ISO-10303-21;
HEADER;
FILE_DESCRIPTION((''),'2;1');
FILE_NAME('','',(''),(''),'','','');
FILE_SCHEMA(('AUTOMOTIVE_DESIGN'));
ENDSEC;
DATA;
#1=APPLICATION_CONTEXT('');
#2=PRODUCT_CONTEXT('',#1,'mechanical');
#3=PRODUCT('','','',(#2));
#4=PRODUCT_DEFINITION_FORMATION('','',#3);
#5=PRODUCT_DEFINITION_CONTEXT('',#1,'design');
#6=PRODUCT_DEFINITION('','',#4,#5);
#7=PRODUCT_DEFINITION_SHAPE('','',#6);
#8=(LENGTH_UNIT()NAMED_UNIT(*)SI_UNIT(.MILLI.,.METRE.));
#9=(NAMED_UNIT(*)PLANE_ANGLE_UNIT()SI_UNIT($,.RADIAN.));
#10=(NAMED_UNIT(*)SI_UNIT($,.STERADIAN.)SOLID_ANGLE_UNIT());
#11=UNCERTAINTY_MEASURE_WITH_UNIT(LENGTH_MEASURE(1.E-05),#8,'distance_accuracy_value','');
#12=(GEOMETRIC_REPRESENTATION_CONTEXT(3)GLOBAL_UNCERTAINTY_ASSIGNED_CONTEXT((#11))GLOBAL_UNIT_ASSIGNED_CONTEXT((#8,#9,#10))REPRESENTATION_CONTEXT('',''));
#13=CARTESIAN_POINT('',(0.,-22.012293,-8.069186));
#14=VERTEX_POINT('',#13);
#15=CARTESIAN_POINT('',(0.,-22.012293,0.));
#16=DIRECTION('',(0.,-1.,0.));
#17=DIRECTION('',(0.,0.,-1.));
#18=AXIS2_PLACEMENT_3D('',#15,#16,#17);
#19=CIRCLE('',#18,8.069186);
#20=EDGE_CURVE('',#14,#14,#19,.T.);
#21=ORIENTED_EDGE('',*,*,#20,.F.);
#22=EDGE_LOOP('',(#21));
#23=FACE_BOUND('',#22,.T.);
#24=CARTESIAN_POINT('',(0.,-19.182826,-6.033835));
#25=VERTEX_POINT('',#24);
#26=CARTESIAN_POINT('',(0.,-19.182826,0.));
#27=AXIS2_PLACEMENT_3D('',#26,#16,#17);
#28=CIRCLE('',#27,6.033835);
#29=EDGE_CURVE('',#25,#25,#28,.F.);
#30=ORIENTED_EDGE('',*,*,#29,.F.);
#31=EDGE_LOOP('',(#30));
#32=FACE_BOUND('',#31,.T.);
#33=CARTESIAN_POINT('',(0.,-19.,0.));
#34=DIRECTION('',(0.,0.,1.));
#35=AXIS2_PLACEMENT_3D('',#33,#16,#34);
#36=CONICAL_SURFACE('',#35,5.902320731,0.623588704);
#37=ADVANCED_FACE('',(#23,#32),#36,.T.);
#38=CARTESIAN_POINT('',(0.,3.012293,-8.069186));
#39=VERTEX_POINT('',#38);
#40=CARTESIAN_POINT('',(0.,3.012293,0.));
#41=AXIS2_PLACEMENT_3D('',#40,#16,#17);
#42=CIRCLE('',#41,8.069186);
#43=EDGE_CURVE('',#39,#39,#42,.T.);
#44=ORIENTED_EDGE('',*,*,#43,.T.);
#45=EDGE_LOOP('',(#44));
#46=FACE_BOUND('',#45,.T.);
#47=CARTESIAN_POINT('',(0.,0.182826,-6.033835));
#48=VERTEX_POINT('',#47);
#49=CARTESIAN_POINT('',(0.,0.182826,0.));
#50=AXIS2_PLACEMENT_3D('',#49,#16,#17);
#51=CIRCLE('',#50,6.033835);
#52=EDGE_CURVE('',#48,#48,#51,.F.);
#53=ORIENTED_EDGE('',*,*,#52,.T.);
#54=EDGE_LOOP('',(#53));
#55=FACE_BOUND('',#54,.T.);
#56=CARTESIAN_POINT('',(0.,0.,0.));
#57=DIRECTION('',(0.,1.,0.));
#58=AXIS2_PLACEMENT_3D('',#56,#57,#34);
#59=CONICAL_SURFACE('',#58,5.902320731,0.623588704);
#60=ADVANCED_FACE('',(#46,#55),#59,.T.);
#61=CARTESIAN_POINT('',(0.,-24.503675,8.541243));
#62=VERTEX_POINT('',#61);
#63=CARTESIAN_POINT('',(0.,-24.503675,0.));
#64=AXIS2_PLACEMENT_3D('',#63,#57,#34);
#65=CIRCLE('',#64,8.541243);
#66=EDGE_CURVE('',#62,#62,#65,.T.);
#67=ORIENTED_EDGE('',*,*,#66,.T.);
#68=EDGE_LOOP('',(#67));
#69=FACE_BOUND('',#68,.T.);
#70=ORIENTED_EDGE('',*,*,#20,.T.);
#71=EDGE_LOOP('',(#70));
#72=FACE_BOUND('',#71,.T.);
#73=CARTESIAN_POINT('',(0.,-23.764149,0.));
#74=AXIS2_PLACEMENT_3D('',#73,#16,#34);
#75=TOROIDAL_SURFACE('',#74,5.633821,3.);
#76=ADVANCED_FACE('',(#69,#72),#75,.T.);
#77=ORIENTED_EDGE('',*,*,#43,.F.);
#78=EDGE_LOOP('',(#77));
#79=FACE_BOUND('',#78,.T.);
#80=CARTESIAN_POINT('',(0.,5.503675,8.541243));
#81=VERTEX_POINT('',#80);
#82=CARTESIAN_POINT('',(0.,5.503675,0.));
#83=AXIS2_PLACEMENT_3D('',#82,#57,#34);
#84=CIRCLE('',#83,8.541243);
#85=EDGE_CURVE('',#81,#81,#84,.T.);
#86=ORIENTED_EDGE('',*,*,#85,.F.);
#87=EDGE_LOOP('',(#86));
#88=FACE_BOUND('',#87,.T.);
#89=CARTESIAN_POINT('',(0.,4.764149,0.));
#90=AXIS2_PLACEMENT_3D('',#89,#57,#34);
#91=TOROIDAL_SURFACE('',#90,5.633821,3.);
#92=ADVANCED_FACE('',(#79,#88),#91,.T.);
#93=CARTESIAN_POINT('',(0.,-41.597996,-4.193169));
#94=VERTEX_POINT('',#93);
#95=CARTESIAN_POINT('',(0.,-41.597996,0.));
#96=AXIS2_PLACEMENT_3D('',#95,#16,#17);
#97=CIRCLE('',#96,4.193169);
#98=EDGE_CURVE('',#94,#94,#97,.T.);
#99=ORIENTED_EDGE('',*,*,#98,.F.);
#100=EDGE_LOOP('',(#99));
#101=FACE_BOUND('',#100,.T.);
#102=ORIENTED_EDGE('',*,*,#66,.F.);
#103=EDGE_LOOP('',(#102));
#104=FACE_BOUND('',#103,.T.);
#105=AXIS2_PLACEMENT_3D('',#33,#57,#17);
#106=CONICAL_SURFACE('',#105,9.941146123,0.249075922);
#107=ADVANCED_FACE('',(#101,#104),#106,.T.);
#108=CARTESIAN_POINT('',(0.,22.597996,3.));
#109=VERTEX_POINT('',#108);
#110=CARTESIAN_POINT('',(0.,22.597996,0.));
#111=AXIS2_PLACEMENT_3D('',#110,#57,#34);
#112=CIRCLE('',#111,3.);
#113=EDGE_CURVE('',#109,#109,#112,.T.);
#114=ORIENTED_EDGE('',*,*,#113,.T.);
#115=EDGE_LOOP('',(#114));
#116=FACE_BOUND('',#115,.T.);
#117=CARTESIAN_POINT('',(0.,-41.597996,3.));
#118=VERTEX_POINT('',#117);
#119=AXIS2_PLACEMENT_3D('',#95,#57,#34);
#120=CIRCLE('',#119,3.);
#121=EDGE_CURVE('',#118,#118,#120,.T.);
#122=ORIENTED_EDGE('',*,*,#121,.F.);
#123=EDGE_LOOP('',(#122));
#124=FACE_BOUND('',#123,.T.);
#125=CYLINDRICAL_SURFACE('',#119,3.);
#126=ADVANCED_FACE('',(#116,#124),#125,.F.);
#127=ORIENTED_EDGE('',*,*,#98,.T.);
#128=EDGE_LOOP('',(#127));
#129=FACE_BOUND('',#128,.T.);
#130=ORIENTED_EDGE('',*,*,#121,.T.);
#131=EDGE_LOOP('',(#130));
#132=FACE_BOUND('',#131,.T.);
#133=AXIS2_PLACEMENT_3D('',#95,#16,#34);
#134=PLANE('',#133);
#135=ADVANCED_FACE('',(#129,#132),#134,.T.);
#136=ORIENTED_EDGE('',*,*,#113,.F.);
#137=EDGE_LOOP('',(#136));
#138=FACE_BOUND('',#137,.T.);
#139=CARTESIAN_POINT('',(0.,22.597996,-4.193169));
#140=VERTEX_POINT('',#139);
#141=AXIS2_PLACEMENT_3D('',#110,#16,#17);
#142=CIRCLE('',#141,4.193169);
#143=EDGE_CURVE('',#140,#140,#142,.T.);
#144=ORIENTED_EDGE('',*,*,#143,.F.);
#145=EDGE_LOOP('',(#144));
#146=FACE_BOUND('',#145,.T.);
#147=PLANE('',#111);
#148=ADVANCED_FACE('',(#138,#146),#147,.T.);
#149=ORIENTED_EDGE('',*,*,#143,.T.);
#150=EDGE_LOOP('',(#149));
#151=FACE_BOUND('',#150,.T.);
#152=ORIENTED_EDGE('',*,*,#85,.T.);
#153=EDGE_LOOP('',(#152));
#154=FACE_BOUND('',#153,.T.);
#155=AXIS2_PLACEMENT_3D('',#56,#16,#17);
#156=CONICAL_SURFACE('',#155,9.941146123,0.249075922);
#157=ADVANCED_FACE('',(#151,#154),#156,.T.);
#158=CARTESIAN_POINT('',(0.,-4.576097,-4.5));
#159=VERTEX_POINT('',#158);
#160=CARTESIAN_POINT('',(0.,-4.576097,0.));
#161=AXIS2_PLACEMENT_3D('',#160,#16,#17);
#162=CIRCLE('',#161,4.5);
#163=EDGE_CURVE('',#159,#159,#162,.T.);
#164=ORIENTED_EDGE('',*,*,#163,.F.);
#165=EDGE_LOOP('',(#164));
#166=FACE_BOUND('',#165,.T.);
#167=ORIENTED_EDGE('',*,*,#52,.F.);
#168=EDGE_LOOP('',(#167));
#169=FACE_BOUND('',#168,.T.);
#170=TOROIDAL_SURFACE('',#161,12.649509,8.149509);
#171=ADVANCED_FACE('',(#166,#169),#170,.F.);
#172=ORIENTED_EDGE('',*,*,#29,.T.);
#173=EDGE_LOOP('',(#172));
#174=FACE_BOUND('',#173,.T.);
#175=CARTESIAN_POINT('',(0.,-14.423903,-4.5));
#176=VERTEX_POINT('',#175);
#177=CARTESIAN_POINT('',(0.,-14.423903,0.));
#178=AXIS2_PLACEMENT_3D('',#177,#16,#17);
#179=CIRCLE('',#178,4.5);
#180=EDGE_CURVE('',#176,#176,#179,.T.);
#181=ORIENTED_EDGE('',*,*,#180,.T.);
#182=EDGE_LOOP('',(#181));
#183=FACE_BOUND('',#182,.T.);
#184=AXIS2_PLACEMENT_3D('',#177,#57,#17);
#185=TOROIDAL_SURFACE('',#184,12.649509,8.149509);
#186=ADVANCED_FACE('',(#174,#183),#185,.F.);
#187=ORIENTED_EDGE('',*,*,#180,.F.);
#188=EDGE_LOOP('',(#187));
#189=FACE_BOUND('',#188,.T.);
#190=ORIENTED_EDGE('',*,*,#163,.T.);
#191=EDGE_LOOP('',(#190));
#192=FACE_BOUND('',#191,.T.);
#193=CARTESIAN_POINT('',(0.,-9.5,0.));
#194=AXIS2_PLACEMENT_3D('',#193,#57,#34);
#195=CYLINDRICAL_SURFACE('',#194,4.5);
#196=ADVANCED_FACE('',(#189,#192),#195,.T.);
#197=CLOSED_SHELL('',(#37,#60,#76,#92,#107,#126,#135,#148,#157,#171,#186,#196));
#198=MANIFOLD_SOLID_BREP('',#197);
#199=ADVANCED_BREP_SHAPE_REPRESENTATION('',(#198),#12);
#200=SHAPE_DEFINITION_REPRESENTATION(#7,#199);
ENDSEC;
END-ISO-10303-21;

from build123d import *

# Parameters (mm, degrees)
CHAMFER1_SIZE       = 4.28
CHAMFER1_SIZE2      = 4.038825392
SKETCH8_R           = 4.5
BOSS_EXTRUDE2_DEPTH = 9.5
FILLET2_R           = 3
SKETCH9_R           = 3
CUT_EXTRUDE2_DEPTH  = 66.346851097


with BuildPart() as part:
    # Sketch7 → Revolve1 (revolve)
    with BuildSketch(Plane(origin=(0, 0, 0), x_dir=(0, 0, -1), z_dir=(1, 0, 0))):
        Polygon((0, 0), (0, 22.597995894), (4.193169033, 22.597995894), (9.941146123, 0), align=None)
    revolve(axis=Axis((0, 0, 0), (0, 1, 0)))

    # Chamfer1
    chamfer1_edges = [part.edges().sort_by_distance(p)[0] for p in [
        (0, 0, 9.941146123),
    ]]
    chamfer1_side = [part.faces().sort_by_distance(p)[0] for p in [
        (0, 11.298997947, 7.067157578),
    ]]
    chamfer(chamfer1_edges, length=CHAMFER1_SIZE, length2=CHAMFER1_SIZE2, reference=chamfer1_side[0])

    # Sketch8 → Boss-Extrude2 (add)
    with BuildSketch(Plane.XZ):
        with Locations(Location((0, 0, 0), (0, 0, 270))):
            Circle(SKETCH8_R)
    extrude(amount=BOSS_EXTRUDE2_DEPTH)

    # Fillet2
    fillet2_edges = [part.edges().sort_by_distance(p)[0] for p in [
        (0, 4.147921891, 8.886089732),
    ]]
    fillet(fillet2_edges, radius=FILLET2_R)

    # Fillet3: read off the stored shape, not the designer's step
    # Fillet3 outline → Fillet3 (revolve)
    with BuildSketch(Plane.XY):
        with BuildLine():
            Line((4.5, 0), (4.5, -4.576097384))
            ThreePointArc((4.5, -4.576097384), (4.892931369, -2.076097384), (6.033834832, 0.182825888))
            Line((6.033834832, 0.182825888), (5.902320731, 0.182825888))
            Line((5.902320731, 0.182825888), (5.902320731, 0))
            Line((5.902320731, 0), (4.5, 0))
        make_face()
    revolve(axis=Axis((0, 0, 0), (0, 1, 0)))

    # Mirror3: part across plane


with BuildPart() as part_1:
    add(part.part)
    add(part.part.mirror(Plane(origin=(0, -9.5, 0), x_dir=(0, 0, 1), z_dir=(0, -1, 0))))

    # Sketch9 → Cut-Extrude2 (cut, through all)
    with BuildSketch(Plane(origin=(0, 22.597995894, 0), x_dir=(1, 0, 0), z_dir=(0, 1, 0))):
        with Locations(Location((0, 0, 0), (0, 0, 270))):
            Circle(SKETCH9_R)
    extrude(amount=-CUT_EXTRUDE2_DEPTH, mode=Mode.SUBTRACT)


solid = part_1.part
